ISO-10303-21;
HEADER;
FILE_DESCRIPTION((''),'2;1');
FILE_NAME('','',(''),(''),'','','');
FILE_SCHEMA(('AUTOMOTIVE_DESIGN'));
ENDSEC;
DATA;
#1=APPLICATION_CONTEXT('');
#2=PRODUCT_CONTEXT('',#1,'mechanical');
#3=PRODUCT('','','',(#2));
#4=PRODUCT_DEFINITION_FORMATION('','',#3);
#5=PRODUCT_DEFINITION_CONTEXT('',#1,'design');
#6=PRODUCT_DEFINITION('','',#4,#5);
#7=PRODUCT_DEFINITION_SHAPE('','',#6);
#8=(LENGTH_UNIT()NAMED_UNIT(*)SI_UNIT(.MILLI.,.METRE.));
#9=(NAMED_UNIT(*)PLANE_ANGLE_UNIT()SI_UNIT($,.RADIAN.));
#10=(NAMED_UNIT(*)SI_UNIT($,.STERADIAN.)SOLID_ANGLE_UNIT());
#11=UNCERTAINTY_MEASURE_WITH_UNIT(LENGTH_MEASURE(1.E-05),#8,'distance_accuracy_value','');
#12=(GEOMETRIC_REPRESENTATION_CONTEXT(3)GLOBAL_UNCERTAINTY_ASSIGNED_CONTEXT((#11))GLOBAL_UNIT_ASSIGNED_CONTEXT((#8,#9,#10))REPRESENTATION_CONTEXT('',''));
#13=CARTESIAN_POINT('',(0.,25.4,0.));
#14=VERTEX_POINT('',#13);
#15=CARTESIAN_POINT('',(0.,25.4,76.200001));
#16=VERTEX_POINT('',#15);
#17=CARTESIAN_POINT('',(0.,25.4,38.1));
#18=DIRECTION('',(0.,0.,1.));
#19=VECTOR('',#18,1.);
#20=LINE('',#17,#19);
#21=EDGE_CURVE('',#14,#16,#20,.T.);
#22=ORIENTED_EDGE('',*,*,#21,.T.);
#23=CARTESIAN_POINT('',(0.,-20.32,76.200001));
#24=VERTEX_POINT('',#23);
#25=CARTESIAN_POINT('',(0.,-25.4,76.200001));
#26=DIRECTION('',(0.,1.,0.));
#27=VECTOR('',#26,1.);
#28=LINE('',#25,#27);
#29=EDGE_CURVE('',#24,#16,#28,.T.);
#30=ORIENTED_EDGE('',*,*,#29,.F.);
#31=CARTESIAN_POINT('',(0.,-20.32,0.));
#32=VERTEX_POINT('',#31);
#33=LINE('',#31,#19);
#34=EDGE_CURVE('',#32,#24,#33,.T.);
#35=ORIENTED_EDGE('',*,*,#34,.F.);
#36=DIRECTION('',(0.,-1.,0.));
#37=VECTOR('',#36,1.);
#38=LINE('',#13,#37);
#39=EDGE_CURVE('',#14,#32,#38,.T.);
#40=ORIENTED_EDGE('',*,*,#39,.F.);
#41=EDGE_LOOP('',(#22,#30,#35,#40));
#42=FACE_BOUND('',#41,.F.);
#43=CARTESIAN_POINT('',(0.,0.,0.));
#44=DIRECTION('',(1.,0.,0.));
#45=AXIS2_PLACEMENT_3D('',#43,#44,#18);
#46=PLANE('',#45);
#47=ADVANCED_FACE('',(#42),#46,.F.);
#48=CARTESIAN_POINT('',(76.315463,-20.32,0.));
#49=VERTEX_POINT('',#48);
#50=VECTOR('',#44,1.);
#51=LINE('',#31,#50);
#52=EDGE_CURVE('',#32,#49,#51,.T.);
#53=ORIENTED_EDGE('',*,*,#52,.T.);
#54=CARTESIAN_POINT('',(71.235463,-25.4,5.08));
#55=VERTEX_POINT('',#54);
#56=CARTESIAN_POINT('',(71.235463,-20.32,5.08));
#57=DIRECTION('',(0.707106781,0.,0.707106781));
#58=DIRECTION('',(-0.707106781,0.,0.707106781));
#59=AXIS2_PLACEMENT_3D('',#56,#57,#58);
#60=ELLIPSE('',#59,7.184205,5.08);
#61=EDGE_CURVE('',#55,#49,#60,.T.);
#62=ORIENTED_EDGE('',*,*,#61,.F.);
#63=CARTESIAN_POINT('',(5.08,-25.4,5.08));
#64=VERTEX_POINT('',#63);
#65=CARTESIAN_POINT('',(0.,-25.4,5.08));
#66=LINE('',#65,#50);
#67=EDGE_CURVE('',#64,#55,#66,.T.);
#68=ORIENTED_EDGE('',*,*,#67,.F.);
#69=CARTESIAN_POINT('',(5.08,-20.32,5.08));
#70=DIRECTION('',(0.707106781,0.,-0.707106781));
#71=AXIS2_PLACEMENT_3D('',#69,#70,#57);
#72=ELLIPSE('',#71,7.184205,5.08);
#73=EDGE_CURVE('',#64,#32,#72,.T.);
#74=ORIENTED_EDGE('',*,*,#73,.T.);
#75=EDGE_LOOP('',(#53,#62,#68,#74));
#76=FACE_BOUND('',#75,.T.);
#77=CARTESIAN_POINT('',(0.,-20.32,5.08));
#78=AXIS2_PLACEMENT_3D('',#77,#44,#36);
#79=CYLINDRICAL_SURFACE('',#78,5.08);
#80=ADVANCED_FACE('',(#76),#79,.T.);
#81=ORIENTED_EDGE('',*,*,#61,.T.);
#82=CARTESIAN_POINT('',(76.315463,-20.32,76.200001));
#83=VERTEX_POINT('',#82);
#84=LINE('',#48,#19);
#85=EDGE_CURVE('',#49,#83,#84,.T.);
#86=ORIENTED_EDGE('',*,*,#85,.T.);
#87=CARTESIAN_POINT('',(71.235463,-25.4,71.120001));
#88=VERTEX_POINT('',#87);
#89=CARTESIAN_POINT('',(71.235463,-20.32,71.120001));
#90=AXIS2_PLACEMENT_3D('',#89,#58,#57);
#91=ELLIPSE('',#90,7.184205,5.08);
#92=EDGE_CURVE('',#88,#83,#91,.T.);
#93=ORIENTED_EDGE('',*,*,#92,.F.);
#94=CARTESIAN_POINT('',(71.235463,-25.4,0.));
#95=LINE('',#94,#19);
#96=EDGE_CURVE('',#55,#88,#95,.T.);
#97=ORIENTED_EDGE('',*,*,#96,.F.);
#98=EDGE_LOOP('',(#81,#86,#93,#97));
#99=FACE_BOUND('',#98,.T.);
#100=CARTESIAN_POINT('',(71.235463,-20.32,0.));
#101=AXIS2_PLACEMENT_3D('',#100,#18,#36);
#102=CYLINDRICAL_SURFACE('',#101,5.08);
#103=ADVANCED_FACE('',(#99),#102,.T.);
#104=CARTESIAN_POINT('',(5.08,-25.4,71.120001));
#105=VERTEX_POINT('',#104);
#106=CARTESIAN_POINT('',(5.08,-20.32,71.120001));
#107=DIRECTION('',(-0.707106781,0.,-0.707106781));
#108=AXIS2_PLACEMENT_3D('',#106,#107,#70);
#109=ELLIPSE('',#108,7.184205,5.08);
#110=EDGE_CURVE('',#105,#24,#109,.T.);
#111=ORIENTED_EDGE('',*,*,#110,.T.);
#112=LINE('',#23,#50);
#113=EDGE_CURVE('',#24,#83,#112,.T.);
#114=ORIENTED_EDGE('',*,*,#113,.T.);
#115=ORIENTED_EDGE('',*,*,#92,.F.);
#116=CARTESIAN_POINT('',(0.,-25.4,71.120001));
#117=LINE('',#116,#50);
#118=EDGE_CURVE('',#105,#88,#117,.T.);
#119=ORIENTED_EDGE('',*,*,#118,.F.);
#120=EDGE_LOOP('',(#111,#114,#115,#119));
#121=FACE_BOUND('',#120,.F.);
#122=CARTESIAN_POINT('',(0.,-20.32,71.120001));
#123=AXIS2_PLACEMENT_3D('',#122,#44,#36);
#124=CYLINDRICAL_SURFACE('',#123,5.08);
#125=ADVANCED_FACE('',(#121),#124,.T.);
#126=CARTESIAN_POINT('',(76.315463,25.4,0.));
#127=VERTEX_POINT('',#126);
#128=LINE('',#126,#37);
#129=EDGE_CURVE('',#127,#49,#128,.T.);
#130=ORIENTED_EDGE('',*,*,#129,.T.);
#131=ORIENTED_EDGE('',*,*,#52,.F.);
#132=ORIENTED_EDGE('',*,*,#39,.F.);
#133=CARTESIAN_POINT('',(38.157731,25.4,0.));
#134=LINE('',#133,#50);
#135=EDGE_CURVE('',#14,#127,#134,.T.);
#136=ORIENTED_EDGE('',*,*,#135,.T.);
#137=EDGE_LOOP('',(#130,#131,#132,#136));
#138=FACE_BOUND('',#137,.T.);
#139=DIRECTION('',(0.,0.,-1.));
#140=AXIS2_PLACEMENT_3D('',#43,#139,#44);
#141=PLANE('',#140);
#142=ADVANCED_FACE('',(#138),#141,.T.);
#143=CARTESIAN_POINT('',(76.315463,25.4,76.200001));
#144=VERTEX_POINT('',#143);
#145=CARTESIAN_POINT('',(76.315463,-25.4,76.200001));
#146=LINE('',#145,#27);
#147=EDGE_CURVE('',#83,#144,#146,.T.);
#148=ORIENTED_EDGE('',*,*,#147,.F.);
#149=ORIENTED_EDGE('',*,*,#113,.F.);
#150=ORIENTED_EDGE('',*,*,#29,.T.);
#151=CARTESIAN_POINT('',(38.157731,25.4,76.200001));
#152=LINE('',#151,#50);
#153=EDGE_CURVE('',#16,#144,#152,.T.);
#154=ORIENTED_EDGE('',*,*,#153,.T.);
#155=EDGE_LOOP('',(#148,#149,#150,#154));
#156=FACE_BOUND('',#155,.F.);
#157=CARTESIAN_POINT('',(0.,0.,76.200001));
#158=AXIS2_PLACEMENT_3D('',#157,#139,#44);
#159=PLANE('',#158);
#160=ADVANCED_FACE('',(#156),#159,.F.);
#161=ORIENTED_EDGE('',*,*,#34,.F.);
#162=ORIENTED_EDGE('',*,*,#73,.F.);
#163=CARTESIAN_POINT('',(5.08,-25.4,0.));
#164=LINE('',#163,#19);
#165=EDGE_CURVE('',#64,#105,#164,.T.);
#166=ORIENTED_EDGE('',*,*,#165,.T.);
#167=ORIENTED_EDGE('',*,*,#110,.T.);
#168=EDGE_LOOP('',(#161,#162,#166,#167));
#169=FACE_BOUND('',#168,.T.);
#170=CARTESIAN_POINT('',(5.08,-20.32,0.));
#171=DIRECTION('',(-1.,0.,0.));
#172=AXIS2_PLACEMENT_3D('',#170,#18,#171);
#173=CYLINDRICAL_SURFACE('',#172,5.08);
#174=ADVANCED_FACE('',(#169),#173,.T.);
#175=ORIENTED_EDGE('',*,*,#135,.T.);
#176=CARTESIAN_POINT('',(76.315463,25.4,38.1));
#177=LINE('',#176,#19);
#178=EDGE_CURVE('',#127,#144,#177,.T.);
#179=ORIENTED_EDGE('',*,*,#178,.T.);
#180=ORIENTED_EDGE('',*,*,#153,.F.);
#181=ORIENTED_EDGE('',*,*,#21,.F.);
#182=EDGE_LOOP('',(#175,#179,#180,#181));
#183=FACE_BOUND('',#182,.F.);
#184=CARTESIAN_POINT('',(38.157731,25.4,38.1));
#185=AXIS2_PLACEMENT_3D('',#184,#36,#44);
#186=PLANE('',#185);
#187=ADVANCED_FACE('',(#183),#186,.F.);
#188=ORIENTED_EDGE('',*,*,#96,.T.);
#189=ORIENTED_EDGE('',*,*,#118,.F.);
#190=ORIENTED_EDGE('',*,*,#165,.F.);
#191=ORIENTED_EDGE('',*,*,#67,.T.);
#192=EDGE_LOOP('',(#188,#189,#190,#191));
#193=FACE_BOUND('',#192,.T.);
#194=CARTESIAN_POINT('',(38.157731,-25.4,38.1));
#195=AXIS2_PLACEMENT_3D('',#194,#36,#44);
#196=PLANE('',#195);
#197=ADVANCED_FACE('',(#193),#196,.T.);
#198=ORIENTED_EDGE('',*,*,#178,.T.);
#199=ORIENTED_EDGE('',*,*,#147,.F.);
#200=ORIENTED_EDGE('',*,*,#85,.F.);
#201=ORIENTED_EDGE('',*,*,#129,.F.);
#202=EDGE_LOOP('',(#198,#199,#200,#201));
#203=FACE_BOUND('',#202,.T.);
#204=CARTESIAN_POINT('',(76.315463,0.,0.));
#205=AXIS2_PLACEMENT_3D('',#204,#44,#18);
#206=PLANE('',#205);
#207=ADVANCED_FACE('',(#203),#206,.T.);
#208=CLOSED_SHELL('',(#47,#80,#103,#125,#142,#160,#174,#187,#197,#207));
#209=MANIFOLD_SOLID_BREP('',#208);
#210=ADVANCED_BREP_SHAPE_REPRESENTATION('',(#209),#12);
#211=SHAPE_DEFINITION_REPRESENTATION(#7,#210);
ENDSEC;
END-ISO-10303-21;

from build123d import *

# Parameters (mm, degrees)
F0_W     = 76.3154625893
F0_H     = 76.2000009418
F1_DEPTH = 25.4
F2_R     = 5.08


with BuildPart() as f1:
    # F0 (on Front) → F1 (new body, symmetric)
    with BuildSketch(Plane.XZ):
        with Locations((38.1577312946, 38.1000004709)):
            Rectangle(F0_W, F0_H)
    extrude(amount=F1_DEPTH, both=True)

    # F2
    f2_edges = [f1.edges().sort_by_distance(p)[0] for p in [
        (38.157731, -25.4, 76.200001),
        (76.315463, -25.4, 38.1),
        (38.157731, -25.4, 0),
        (0, -25.4, 38.1),
    ]]
    fillet(f2_edges, radius=F2_R)


solid = f1.part
